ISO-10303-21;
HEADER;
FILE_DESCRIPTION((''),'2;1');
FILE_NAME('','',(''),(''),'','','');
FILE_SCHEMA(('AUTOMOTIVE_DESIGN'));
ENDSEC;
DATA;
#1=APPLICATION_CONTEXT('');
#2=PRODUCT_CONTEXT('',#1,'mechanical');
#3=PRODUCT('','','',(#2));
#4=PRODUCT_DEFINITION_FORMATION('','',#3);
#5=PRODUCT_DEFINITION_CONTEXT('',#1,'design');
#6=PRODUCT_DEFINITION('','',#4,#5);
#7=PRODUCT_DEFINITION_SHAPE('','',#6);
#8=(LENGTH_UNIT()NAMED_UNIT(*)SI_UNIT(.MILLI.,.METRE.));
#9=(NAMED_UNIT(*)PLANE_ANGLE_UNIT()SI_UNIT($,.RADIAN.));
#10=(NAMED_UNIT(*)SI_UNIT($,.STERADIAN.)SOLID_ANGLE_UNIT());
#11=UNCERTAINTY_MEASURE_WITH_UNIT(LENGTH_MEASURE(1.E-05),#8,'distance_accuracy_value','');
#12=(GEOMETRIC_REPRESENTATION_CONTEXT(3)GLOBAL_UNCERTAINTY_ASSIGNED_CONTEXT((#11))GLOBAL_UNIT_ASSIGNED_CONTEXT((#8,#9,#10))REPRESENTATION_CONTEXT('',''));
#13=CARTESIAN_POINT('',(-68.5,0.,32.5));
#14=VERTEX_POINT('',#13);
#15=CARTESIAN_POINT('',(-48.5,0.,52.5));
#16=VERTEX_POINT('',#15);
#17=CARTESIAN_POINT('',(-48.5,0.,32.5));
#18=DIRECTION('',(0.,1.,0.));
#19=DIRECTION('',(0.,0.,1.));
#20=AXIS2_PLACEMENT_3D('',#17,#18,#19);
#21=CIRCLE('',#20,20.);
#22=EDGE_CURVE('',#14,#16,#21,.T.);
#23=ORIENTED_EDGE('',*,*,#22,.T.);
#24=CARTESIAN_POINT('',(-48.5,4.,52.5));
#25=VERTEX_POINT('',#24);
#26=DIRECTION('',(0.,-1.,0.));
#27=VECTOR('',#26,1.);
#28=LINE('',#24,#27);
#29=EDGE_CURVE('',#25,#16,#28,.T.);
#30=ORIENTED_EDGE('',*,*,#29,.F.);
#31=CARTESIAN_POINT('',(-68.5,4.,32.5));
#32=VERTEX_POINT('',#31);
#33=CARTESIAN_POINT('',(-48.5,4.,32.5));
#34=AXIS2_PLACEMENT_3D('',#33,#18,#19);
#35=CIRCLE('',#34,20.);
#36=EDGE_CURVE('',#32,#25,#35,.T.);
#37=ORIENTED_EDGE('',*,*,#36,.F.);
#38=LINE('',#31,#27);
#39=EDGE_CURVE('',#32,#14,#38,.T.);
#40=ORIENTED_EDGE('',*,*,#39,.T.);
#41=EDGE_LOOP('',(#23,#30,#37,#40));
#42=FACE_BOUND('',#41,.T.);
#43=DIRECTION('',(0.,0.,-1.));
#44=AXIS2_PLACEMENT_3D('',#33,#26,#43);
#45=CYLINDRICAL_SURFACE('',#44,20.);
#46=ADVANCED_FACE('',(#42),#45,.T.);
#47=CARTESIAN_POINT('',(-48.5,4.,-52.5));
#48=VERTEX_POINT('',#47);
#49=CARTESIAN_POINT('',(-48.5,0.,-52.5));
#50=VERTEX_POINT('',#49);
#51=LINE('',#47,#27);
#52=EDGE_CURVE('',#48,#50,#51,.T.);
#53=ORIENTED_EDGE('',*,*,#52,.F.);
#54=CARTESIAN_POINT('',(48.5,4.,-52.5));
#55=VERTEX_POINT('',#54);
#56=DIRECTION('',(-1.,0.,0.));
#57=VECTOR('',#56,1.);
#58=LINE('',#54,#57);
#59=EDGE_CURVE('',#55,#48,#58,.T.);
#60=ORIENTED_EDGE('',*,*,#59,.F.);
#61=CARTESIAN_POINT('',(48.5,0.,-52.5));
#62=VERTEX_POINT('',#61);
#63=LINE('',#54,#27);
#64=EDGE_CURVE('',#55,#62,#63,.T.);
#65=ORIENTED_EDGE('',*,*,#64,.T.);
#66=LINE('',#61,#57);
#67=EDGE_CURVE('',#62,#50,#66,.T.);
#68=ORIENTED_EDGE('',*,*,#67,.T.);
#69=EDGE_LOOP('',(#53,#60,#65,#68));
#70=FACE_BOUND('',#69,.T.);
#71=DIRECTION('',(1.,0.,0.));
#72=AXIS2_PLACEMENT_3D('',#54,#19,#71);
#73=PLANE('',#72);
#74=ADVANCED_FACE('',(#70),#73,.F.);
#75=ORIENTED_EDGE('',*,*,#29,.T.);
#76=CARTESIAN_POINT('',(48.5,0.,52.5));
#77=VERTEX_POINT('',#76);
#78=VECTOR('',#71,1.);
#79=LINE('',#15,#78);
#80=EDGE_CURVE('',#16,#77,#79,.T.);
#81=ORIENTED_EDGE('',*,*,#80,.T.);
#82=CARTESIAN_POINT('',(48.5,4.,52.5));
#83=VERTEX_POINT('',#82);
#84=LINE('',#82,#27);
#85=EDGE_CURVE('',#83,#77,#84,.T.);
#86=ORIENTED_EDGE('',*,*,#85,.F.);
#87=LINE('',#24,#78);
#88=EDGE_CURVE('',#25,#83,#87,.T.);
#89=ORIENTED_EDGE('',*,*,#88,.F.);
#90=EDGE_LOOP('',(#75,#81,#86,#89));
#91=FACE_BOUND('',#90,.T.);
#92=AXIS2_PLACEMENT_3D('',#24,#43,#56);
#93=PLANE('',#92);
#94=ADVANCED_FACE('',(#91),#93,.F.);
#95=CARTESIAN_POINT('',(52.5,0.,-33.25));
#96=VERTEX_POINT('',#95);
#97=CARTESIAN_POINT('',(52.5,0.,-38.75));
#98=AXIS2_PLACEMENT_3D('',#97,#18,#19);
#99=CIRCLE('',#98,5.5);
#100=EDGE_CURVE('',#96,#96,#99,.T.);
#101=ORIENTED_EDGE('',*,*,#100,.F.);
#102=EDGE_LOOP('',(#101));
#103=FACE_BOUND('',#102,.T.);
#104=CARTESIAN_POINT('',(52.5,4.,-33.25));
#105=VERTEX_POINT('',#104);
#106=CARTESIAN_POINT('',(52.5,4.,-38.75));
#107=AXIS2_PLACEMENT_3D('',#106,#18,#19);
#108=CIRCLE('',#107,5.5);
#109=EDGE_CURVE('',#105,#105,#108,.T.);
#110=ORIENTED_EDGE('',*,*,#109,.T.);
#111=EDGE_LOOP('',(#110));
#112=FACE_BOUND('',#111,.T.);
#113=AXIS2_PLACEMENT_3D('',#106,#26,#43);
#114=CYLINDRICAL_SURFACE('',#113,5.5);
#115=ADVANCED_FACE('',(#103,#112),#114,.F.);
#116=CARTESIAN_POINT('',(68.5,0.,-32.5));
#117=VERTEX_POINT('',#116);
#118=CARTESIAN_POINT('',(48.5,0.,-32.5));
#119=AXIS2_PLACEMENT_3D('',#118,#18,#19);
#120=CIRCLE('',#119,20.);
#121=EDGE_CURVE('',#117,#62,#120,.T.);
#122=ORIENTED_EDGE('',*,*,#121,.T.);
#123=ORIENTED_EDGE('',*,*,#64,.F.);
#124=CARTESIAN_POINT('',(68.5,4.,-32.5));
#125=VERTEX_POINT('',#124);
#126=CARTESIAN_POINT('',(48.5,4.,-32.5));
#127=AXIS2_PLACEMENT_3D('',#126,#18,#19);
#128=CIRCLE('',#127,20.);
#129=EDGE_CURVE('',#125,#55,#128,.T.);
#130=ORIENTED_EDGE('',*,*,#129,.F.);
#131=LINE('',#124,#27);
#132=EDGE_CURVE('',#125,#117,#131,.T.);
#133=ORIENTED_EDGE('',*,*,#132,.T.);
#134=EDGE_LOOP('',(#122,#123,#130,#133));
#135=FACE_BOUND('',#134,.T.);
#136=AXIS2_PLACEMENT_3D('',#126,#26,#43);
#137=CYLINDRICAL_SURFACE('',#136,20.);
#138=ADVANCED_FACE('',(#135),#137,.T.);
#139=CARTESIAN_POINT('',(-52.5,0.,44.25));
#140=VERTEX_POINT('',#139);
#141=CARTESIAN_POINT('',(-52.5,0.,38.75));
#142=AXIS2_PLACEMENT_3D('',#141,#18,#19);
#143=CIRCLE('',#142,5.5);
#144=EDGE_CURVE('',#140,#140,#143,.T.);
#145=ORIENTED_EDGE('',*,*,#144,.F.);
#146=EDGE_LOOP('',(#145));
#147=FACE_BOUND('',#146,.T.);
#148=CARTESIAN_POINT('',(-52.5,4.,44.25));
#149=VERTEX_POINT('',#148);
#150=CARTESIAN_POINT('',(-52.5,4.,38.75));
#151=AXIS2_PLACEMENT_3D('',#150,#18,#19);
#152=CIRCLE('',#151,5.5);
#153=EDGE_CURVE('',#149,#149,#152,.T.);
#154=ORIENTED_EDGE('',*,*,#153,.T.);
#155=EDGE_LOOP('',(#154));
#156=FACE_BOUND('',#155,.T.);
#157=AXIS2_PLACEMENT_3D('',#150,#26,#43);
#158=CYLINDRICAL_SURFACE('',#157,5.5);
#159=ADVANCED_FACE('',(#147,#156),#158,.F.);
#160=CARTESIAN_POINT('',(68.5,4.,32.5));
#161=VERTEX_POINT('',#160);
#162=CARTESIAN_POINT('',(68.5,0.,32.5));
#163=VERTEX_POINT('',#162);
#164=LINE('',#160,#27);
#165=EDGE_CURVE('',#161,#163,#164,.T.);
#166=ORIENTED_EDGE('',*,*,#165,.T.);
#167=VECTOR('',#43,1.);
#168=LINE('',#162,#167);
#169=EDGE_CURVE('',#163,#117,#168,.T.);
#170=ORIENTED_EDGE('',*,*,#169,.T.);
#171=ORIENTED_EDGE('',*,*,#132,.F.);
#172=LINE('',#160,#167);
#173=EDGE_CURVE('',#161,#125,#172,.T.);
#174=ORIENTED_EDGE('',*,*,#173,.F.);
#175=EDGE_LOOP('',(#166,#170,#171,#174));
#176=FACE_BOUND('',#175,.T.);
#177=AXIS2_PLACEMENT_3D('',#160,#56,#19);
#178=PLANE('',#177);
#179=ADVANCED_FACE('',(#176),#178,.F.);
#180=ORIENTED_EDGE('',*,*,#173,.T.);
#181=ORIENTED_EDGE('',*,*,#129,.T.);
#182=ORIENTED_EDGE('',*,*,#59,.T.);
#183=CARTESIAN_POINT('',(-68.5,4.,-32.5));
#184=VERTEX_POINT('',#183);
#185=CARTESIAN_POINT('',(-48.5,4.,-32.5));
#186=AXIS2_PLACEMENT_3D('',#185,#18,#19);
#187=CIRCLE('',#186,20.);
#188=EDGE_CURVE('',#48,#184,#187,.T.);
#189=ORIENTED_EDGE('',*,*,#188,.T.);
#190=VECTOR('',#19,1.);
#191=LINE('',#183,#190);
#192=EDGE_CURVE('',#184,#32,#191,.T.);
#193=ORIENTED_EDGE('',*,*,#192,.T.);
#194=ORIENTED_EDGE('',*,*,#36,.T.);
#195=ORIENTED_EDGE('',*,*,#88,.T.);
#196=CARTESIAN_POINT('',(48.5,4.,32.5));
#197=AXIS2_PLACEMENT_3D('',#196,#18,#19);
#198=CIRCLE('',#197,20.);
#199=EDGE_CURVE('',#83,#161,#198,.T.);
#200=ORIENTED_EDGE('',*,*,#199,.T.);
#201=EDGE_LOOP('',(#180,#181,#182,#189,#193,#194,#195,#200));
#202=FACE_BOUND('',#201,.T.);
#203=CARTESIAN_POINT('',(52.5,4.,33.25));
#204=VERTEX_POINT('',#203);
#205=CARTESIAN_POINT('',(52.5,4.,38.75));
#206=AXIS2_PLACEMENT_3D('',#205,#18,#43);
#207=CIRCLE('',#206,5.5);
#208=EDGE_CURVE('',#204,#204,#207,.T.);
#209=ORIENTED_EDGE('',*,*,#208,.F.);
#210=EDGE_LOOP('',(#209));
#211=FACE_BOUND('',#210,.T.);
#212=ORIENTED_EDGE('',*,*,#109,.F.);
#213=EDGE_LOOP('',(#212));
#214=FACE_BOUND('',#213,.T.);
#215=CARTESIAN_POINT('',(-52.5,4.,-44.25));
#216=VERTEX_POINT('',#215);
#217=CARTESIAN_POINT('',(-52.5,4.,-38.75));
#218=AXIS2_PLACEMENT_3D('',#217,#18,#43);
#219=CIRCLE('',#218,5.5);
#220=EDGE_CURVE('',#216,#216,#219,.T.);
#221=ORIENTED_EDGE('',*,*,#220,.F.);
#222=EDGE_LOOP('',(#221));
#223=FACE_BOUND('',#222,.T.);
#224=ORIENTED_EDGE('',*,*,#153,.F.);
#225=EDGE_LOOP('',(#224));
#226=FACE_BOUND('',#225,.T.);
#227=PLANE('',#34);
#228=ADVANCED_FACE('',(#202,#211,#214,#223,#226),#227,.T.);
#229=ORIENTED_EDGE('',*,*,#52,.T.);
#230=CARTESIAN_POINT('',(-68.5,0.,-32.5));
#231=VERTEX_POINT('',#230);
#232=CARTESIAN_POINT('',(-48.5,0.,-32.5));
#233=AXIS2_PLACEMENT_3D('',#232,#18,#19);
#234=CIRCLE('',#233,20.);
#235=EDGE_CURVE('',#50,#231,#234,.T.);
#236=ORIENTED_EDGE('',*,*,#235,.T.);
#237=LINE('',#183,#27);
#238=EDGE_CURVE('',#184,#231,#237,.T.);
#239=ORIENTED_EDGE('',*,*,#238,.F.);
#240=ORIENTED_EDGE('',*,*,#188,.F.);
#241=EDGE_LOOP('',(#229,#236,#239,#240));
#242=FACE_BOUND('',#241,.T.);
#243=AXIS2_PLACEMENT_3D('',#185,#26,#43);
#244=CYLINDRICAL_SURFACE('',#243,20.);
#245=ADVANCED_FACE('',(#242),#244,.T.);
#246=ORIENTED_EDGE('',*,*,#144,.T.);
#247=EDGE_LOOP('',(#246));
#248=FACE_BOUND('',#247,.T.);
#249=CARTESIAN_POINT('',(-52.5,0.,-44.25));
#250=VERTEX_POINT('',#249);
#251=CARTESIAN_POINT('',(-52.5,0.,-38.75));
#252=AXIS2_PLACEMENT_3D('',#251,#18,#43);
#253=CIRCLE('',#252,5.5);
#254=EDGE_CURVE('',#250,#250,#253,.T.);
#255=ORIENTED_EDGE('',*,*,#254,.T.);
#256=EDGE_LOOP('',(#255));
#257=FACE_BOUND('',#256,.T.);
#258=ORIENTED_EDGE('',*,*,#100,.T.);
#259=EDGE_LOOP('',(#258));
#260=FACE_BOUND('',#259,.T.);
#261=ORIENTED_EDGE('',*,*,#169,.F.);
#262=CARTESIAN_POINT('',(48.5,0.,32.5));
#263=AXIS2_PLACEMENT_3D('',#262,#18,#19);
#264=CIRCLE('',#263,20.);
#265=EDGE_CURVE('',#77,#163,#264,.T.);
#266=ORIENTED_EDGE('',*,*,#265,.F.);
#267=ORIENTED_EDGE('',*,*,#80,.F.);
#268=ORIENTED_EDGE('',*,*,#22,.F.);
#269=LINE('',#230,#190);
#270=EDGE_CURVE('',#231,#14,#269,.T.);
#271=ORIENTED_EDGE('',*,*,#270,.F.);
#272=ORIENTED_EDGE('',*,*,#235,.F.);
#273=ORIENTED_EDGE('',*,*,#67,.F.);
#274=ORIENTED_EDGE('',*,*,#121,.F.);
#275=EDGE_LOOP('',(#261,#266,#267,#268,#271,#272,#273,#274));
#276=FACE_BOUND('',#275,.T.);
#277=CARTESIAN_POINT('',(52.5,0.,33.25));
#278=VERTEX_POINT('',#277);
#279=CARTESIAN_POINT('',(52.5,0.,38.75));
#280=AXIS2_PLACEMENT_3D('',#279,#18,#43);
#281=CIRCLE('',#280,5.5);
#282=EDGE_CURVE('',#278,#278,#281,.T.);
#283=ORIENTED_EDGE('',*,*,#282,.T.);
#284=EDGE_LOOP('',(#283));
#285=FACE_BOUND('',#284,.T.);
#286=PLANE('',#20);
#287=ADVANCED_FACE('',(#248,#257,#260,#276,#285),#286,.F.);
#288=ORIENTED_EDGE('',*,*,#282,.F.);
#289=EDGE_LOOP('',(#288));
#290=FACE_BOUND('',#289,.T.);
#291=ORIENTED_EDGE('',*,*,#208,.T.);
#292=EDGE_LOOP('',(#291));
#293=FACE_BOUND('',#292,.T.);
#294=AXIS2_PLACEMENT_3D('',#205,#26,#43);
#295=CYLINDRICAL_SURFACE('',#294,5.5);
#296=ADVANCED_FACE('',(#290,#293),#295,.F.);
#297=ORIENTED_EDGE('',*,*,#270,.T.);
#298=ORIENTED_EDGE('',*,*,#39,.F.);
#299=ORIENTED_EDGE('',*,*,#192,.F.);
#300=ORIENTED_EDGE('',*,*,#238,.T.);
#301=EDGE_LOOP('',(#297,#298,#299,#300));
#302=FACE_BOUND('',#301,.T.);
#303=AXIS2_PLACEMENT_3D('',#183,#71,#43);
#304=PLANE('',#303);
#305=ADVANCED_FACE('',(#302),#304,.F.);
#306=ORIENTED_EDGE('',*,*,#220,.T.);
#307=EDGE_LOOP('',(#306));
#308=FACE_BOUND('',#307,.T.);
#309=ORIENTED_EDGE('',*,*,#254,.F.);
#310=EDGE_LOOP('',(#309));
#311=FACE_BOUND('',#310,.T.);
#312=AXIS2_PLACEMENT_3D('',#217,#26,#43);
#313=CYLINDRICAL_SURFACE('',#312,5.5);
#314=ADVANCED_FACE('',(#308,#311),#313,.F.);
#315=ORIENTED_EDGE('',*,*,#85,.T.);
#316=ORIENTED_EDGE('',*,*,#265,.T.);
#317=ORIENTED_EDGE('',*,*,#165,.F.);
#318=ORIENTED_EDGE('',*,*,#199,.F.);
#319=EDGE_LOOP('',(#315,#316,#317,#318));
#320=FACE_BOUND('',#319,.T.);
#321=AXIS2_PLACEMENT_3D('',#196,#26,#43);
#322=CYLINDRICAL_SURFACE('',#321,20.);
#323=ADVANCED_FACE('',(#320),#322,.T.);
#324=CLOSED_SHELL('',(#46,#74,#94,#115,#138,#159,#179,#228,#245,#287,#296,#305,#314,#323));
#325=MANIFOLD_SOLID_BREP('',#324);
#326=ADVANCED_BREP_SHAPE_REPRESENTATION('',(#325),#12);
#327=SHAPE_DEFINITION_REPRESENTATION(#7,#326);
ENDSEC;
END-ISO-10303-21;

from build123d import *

# Parameters (mm, degrees)
SKETCH_2_R             = 5.5
SM_BASE_FLANGE_1_DEPTH = 4


# Sheet-metal steps are written as plain solids
with BuildPart() as part:
    # Sketch 2 → Базовая кромка1 (new body)
    with BuildSketch(Plane(origin=(0, 0, 0), x_dir=(1, 0, 0), z_dir=(0, 1, 0))):
        with BuildLine():
            Line((-48.5, -52.5), (48.5, -52.5))
            ThreePointArc((48.5, -52.5), (62.642135624, -46.642135624), (68.5, -32.5))
            Line((68.5, -32.5), (68.5, 32.5))
            ThreePointArc((68.5, 32.5), (62.642135624, 46.642135624), (48.5, 52.5))
            Line((48.5, 52.5), (-48.5, 52.5))
            ThreePointArc((-48.5, 52.5), (-62.642135624, 46.642135624), (-68.5, 32.5))
            Line((-68.5, 32.5), (-68.5, -32.5))
            ThreePointArc((-68.5, -32.5), (-62.642135624, -46.642135624), (-48.5, -52.5))
        make_face()
        with Locations(Location((52.5, 38.75, 0), (0, 0, 270))):
            Circle(SKETCH_2_R, mode=Mode.SUBTRACT)
        with Locations(Location((-52.5, 38.75, 0), (0, 0, 90))):
            Circle(SKETCH_2_R, mode=Mode.SUBTRACT)
        with Locations(Location((52.5, -38.75, 0), (0, 0, 90))):
            Circle(SKETCH_2_R, mode=Mode.SUBTRACT)
        with Locations(Location((-52.5, -38.75, 0), (0, 0, 270))):
            Circle(SKETCH_2_R, mode=Mode.SUBTRACT)
    extrude(amount=SM_BASE_FLANGE_1_DEPTH)


solid = part.part
